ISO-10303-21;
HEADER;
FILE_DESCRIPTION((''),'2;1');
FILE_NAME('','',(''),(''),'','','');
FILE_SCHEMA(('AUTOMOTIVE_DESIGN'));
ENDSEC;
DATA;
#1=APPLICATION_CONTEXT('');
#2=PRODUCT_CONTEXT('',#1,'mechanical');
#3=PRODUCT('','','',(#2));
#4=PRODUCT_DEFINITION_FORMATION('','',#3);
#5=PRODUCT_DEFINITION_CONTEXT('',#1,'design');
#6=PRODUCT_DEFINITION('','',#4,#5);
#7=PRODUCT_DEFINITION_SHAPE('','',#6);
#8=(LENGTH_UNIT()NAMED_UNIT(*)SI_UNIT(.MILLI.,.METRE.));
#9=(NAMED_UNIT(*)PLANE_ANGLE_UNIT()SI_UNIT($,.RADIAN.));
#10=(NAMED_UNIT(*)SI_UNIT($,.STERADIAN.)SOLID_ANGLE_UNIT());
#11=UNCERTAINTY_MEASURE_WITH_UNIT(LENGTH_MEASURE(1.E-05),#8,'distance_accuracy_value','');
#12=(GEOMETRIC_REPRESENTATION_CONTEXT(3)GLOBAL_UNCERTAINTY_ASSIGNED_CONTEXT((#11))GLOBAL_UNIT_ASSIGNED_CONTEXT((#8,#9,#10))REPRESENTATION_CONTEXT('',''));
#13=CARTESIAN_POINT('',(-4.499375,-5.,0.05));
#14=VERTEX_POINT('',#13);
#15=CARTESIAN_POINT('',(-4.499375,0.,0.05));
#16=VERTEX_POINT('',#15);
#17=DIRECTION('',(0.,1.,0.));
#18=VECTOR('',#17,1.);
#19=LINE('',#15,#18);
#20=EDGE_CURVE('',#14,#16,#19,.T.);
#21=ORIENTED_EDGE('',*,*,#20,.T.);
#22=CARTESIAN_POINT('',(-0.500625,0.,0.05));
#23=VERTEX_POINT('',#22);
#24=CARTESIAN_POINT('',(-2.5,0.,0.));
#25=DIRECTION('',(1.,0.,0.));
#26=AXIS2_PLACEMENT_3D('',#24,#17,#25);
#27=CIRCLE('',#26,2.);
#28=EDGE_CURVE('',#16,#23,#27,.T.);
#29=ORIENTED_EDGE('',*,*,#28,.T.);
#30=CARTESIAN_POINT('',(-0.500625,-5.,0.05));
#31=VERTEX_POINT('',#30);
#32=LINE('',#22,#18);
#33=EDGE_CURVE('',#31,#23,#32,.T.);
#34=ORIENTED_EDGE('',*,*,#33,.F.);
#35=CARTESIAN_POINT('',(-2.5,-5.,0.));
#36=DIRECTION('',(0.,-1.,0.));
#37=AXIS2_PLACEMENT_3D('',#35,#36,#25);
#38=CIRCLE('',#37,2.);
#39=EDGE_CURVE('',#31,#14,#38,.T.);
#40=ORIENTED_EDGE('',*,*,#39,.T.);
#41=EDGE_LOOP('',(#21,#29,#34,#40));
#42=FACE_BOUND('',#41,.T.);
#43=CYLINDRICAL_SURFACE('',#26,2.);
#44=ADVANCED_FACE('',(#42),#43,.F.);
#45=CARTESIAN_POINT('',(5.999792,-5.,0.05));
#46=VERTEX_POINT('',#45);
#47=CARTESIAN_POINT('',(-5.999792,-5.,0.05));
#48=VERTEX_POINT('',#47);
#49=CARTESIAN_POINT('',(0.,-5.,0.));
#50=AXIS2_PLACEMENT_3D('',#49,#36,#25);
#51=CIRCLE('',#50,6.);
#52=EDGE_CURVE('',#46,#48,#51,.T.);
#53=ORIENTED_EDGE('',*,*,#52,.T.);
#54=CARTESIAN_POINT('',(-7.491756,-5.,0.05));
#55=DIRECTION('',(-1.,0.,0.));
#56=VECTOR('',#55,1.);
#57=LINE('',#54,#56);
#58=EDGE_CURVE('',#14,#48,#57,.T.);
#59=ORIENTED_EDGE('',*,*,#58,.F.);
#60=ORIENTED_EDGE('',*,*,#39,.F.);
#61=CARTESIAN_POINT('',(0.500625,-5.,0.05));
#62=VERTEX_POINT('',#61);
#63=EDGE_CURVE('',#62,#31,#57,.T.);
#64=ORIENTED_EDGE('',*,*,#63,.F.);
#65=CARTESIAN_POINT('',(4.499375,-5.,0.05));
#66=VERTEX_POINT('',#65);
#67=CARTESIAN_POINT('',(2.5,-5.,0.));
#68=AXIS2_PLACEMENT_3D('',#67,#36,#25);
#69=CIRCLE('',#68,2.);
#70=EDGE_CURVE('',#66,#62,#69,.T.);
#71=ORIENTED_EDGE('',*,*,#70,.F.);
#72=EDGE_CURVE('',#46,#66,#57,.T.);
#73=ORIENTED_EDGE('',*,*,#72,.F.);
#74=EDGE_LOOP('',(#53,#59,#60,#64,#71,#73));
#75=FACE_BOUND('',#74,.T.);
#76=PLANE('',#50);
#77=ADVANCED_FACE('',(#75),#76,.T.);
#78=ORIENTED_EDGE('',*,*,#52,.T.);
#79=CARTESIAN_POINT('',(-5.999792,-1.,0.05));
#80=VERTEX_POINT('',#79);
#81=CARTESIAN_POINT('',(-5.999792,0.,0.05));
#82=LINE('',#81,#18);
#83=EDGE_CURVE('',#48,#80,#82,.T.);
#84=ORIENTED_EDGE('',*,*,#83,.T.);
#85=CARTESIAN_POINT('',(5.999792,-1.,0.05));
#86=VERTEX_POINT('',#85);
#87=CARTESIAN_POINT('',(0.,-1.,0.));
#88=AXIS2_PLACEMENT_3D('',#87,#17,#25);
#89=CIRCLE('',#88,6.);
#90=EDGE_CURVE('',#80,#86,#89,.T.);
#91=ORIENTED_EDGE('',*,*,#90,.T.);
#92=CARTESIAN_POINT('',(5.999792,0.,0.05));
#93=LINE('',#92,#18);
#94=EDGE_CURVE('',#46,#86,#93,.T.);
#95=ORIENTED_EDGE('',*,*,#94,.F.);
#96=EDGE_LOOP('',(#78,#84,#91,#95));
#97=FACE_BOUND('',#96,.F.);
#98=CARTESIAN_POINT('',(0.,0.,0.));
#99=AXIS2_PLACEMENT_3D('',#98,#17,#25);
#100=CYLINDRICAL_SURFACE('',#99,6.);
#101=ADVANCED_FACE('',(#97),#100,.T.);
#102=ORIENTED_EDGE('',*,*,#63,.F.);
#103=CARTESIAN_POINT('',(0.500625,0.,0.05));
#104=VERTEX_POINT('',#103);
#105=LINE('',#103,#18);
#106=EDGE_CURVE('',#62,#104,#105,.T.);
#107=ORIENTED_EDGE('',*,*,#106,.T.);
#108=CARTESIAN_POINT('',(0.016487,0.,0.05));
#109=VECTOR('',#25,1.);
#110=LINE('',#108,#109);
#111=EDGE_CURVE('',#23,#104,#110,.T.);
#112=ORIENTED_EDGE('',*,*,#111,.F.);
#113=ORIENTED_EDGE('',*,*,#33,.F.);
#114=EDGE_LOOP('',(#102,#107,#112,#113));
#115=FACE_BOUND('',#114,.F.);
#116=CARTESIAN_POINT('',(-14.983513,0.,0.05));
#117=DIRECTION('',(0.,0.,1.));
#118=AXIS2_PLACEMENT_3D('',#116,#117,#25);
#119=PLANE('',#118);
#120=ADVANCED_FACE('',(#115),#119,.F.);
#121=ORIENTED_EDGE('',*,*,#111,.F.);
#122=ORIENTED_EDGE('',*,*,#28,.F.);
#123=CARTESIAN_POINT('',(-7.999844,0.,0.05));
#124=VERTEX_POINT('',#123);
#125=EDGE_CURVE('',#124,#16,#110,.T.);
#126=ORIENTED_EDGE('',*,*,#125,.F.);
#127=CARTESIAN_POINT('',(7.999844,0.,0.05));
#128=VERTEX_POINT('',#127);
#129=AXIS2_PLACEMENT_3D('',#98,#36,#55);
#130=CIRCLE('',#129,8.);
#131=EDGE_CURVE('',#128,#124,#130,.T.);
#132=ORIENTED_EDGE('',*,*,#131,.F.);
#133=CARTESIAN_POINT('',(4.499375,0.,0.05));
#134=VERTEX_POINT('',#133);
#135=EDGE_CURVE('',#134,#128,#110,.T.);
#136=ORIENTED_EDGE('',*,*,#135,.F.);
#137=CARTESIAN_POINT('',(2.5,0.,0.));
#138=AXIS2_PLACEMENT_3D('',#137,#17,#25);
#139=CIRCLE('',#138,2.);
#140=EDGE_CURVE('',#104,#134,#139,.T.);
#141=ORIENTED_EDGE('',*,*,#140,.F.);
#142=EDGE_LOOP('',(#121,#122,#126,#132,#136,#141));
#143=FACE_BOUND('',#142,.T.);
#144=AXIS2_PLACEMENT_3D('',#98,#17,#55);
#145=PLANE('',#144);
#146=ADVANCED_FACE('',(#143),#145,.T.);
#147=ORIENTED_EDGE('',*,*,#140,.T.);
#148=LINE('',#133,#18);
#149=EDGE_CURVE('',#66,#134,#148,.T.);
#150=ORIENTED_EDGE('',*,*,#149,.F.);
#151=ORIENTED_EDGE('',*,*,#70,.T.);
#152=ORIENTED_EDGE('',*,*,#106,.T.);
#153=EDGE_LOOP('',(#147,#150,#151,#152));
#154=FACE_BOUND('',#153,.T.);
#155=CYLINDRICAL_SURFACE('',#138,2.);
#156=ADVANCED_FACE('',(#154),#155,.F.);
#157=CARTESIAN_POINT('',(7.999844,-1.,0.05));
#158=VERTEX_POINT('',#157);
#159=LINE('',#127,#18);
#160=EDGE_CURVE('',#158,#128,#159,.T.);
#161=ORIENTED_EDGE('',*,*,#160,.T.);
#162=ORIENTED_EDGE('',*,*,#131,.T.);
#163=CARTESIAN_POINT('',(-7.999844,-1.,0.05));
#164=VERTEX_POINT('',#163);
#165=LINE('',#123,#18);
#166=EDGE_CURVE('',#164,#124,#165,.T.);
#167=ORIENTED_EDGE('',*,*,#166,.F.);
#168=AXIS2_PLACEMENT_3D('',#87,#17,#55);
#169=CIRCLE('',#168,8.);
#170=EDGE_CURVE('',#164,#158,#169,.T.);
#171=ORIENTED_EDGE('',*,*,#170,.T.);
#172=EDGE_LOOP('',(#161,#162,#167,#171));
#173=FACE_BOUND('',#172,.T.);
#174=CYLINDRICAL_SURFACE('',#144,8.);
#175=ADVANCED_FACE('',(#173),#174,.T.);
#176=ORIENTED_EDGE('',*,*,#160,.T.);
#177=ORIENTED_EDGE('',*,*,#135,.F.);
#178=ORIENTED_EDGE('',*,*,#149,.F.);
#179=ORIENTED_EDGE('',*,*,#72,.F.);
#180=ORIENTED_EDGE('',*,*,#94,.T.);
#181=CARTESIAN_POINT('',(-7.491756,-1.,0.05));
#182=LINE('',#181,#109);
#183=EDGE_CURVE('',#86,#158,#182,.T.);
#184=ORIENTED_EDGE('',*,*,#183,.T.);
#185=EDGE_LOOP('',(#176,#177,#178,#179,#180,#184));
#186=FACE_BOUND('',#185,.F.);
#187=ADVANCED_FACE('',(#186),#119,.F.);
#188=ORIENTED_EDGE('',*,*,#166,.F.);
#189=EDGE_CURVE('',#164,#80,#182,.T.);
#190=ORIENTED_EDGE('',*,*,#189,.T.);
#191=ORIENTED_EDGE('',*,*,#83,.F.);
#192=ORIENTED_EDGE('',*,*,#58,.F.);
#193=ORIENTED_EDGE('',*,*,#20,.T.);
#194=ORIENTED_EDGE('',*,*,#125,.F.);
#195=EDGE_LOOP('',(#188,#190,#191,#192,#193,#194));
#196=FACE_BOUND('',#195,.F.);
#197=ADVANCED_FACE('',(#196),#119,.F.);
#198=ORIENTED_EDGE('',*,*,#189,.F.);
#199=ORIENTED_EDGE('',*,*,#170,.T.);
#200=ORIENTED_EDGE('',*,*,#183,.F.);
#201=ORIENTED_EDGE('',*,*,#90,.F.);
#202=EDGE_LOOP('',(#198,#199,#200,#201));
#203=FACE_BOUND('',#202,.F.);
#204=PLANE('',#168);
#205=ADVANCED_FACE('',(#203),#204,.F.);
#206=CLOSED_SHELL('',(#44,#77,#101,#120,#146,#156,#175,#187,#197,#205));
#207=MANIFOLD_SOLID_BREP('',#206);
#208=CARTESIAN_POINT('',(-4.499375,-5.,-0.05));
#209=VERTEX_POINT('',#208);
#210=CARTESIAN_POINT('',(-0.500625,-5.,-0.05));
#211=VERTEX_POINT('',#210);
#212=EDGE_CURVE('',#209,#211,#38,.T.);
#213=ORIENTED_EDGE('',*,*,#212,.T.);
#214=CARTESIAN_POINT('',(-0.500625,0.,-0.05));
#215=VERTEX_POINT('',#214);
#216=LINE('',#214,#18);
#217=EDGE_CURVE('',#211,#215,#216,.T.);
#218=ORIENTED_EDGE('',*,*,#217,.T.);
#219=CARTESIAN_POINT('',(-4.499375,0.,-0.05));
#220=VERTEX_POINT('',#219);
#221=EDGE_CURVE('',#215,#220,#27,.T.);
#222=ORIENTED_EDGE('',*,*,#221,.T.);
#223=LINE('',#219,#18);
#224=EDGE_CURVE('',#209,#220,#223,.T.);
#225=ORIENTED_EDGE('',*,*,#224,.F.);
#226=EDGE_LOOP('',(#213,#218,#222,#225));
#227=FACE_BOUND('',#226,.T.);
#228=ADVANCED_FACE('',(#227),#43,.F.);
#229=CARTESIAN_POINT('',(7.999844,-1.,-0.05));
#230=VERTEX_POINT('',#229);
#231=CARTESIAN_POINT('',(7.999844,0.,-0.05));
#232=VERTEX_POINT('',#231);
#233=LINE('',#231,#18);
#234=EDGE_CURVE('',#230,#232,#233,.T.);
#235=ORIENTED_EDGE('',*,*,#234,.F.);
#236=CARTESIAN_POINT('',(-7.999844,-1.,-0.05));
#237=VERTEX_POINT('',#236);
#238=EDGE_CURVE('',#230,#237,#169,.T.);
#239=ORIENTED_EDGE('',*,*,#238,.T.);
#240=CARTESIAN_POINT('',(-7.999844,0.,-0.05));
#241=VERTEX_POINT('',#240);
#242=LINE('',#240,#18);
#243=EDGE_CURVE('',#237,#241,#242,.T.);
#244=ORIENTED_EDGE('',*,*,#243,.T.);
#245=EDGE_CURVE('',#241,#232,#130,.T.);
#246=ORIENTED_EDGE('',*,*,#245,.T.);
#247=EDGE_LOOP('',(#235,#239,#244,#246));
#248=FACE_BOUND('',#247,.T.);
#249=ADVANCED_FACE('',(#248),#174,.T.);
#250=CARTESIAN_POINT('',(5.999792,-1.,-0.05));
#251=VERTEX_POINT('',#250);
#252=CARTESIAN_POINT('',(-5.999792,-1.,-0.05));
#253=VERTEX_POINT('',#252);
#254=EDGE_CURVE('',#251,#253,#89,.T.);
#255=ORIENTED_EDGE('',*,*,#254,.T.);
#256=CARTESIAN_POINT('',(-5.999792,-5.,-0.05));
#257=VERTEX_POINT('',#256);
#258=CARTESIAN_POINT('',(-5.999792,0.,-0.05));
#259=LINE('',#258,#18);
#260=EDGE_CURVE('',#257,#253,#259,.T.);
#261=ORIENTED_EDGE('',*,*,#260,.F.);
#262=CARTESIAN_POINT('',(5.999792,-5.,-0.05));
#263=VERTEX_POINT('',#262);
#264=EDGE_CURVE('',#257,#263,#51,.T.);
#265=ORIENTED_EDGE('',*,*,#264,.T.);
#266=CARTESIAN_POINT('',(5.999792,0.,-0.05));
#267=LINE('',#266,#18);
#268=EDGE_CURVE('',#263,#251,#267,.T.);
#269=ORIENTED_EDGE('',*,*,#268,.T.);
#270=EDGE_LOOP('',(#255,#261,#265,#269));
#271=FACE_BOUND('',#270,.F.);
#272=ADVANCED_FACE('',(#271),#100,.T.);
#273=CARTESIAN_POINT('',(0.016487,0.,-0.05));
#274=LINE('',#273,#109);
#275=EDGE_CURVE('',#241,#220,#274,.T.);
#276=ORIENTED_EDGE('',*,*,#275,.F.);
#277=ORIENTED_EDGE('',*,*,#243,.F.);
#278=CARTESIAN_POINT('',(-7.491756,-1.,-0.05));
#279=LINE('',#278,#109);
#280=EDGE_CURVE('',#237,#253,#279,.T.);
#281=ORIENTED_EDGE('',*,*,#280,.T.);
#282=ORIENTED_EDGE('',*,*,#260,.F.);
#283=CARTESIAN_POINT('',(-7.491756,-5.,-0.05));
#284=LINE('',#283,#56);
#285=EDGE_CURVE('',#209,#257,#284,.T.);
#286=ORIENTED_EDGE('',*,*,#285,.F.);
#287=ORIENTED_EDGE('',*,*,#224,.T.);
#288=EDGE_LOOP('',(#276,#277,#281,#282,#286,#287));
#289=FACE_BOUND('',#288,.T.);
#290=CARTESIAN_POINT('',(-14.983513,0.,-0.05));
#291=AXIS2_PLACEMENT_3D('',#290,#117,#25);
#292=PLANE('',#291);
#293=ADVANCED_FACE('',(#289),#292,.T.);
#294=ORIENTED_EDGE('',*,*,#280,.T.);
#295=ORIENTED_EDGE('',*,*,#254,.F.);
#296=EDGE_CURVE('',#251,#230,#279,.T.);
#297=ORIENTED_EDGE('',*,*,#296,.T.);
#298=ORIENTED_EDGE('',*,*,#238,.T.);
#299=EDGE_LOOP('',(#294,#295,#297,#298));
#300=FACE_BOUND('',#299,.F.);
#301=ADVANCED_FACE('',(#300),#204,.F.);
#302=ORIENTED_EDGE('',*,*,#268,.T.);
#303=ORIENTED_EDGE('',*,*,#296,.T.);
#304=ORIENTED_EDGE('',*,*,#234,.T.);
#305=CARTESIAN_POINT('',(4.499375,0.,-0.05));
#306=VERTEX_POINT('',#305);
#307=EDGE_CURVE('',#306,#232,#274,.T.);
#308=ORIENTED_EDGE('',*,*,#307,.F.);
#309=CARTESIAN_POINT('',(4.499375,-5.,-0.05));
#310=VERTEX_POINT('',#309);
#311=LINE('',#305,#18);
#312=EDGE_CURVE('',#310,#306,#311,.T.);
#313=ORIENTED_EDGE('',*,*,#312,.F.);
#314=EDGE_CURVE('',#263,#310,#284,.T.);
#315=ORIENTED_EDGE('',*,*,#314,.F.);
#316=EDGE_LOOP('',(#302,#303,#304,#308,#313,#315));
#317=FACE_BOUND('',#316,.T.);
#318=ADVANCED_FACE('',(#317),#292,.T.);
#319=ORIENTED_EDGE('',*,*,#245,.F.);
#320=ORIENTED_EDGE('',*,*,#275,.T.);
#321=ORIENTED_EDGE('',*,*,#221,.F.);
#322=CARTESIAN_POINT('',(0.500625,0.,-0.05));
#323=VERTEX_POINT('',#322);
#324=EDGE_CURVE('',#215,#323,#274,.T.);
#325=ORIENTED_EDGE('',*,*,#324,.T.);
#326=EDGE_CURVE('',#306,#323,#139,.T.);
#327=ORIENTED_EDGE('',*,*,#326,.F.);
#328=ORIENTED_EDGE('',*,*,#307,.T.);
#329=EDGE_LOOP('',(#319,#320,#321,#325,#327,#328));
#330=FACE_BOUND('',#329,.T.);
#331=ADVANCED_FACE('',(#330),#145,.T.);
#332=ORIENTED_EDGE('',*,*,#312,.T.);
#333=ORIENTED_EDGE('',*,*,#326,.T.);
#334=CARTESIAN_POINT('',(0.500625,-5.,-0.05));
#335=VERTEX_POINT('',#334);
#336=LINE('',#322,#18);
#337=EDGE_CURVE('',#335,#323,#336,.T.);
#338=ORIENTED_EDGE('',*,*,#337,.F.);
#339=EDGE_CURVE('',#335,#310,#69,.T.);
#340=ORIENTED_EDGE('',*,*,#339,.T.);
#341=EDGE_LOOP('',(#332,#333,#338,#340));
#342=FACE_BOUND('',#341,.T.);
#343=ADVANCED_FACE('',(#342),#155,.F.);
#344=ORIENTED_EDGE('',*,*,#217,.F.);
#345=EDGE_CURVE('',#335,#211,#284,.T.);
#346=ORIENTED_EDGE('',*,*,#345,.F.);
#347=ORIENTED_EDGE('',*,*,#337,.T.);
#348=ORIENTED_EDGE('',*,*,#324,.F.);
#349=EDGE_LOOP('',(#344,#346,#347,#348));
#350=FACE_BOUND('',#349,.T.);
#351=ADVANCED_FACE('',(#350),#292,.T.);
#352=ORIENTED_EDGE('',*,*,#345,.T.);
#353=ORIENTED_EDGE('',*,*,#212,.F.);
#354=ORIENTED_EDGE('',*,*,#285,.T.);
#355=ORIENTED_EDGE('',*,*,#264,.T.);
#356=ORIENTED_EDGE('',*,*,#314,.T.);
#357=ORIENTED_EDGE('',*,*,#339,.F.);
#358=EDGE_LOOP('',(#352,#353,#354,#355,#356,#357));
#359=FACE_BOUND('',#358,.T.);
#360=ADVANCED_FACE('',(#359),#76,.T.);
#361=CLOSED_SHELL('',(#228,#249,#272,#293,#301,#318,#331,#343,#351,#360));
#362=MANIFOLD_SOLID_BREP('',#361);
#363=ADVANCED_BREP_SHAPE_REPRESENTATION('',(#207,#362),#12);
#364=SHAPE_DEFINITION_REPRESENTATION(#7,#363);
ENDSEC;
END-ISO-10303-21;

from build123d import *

# Parameters (mm, degrees)
F0_R          = 6
F0_R_2        = 2
F1_DEPTH      = 5
F2_R          = 8
F2_R_2        = 6
F3_DEPTH      = 1
F4_W          = 30
F4_H          = 0.1
F5_DEPTH      = 26
F5_DEPTH_BACK = 5.001


# Not quite as in the source:
# - an extrude ends at something that could not be found from the text; its depth is read off the source's solid


with BuildPart() as f1:
    # F0 (on Front) → F1 (new body)
    with BuildSketch(Plane.XZ):
        Circle(F0_R)
        with Locations((-2.5, 0)):
            Circle(F0_R_2, mode=Mode.SUBTRACT)
        with Locations((2.5, 0)):
            Circle(F0_R_2, mode=Mode.SUBTRACT)
    extrude(amount=F1_DEPTH)

    # F2 (on face) → F3 (join)
    with BuildSketch(Plane(origin=(0, 0, 0), x_dir=(-1, 0, 0), z_dir=(0, 1, 0))):
        Circle(F2_R)
        Circle(F2_R_2, mode=Mode.SUBTRACT)
    extrude(amount=-F3_DEPTH)

    # F4 (on Front) → F5 (cut, two sides)
    with BuildSketch(Plane.XZ) as f5_sk:
        with Locations((0.0164873028, 0)):
            Rectangle(F4_W, F4_H)
    extrude(amount=-F5_DEPTH, mode=Mode.SUBTRACT)
    extrude(f5_sk.sketch, amount=F5_DEPTH_BACK, mode=Mode.SUBTRACT)


solid = f1.part
